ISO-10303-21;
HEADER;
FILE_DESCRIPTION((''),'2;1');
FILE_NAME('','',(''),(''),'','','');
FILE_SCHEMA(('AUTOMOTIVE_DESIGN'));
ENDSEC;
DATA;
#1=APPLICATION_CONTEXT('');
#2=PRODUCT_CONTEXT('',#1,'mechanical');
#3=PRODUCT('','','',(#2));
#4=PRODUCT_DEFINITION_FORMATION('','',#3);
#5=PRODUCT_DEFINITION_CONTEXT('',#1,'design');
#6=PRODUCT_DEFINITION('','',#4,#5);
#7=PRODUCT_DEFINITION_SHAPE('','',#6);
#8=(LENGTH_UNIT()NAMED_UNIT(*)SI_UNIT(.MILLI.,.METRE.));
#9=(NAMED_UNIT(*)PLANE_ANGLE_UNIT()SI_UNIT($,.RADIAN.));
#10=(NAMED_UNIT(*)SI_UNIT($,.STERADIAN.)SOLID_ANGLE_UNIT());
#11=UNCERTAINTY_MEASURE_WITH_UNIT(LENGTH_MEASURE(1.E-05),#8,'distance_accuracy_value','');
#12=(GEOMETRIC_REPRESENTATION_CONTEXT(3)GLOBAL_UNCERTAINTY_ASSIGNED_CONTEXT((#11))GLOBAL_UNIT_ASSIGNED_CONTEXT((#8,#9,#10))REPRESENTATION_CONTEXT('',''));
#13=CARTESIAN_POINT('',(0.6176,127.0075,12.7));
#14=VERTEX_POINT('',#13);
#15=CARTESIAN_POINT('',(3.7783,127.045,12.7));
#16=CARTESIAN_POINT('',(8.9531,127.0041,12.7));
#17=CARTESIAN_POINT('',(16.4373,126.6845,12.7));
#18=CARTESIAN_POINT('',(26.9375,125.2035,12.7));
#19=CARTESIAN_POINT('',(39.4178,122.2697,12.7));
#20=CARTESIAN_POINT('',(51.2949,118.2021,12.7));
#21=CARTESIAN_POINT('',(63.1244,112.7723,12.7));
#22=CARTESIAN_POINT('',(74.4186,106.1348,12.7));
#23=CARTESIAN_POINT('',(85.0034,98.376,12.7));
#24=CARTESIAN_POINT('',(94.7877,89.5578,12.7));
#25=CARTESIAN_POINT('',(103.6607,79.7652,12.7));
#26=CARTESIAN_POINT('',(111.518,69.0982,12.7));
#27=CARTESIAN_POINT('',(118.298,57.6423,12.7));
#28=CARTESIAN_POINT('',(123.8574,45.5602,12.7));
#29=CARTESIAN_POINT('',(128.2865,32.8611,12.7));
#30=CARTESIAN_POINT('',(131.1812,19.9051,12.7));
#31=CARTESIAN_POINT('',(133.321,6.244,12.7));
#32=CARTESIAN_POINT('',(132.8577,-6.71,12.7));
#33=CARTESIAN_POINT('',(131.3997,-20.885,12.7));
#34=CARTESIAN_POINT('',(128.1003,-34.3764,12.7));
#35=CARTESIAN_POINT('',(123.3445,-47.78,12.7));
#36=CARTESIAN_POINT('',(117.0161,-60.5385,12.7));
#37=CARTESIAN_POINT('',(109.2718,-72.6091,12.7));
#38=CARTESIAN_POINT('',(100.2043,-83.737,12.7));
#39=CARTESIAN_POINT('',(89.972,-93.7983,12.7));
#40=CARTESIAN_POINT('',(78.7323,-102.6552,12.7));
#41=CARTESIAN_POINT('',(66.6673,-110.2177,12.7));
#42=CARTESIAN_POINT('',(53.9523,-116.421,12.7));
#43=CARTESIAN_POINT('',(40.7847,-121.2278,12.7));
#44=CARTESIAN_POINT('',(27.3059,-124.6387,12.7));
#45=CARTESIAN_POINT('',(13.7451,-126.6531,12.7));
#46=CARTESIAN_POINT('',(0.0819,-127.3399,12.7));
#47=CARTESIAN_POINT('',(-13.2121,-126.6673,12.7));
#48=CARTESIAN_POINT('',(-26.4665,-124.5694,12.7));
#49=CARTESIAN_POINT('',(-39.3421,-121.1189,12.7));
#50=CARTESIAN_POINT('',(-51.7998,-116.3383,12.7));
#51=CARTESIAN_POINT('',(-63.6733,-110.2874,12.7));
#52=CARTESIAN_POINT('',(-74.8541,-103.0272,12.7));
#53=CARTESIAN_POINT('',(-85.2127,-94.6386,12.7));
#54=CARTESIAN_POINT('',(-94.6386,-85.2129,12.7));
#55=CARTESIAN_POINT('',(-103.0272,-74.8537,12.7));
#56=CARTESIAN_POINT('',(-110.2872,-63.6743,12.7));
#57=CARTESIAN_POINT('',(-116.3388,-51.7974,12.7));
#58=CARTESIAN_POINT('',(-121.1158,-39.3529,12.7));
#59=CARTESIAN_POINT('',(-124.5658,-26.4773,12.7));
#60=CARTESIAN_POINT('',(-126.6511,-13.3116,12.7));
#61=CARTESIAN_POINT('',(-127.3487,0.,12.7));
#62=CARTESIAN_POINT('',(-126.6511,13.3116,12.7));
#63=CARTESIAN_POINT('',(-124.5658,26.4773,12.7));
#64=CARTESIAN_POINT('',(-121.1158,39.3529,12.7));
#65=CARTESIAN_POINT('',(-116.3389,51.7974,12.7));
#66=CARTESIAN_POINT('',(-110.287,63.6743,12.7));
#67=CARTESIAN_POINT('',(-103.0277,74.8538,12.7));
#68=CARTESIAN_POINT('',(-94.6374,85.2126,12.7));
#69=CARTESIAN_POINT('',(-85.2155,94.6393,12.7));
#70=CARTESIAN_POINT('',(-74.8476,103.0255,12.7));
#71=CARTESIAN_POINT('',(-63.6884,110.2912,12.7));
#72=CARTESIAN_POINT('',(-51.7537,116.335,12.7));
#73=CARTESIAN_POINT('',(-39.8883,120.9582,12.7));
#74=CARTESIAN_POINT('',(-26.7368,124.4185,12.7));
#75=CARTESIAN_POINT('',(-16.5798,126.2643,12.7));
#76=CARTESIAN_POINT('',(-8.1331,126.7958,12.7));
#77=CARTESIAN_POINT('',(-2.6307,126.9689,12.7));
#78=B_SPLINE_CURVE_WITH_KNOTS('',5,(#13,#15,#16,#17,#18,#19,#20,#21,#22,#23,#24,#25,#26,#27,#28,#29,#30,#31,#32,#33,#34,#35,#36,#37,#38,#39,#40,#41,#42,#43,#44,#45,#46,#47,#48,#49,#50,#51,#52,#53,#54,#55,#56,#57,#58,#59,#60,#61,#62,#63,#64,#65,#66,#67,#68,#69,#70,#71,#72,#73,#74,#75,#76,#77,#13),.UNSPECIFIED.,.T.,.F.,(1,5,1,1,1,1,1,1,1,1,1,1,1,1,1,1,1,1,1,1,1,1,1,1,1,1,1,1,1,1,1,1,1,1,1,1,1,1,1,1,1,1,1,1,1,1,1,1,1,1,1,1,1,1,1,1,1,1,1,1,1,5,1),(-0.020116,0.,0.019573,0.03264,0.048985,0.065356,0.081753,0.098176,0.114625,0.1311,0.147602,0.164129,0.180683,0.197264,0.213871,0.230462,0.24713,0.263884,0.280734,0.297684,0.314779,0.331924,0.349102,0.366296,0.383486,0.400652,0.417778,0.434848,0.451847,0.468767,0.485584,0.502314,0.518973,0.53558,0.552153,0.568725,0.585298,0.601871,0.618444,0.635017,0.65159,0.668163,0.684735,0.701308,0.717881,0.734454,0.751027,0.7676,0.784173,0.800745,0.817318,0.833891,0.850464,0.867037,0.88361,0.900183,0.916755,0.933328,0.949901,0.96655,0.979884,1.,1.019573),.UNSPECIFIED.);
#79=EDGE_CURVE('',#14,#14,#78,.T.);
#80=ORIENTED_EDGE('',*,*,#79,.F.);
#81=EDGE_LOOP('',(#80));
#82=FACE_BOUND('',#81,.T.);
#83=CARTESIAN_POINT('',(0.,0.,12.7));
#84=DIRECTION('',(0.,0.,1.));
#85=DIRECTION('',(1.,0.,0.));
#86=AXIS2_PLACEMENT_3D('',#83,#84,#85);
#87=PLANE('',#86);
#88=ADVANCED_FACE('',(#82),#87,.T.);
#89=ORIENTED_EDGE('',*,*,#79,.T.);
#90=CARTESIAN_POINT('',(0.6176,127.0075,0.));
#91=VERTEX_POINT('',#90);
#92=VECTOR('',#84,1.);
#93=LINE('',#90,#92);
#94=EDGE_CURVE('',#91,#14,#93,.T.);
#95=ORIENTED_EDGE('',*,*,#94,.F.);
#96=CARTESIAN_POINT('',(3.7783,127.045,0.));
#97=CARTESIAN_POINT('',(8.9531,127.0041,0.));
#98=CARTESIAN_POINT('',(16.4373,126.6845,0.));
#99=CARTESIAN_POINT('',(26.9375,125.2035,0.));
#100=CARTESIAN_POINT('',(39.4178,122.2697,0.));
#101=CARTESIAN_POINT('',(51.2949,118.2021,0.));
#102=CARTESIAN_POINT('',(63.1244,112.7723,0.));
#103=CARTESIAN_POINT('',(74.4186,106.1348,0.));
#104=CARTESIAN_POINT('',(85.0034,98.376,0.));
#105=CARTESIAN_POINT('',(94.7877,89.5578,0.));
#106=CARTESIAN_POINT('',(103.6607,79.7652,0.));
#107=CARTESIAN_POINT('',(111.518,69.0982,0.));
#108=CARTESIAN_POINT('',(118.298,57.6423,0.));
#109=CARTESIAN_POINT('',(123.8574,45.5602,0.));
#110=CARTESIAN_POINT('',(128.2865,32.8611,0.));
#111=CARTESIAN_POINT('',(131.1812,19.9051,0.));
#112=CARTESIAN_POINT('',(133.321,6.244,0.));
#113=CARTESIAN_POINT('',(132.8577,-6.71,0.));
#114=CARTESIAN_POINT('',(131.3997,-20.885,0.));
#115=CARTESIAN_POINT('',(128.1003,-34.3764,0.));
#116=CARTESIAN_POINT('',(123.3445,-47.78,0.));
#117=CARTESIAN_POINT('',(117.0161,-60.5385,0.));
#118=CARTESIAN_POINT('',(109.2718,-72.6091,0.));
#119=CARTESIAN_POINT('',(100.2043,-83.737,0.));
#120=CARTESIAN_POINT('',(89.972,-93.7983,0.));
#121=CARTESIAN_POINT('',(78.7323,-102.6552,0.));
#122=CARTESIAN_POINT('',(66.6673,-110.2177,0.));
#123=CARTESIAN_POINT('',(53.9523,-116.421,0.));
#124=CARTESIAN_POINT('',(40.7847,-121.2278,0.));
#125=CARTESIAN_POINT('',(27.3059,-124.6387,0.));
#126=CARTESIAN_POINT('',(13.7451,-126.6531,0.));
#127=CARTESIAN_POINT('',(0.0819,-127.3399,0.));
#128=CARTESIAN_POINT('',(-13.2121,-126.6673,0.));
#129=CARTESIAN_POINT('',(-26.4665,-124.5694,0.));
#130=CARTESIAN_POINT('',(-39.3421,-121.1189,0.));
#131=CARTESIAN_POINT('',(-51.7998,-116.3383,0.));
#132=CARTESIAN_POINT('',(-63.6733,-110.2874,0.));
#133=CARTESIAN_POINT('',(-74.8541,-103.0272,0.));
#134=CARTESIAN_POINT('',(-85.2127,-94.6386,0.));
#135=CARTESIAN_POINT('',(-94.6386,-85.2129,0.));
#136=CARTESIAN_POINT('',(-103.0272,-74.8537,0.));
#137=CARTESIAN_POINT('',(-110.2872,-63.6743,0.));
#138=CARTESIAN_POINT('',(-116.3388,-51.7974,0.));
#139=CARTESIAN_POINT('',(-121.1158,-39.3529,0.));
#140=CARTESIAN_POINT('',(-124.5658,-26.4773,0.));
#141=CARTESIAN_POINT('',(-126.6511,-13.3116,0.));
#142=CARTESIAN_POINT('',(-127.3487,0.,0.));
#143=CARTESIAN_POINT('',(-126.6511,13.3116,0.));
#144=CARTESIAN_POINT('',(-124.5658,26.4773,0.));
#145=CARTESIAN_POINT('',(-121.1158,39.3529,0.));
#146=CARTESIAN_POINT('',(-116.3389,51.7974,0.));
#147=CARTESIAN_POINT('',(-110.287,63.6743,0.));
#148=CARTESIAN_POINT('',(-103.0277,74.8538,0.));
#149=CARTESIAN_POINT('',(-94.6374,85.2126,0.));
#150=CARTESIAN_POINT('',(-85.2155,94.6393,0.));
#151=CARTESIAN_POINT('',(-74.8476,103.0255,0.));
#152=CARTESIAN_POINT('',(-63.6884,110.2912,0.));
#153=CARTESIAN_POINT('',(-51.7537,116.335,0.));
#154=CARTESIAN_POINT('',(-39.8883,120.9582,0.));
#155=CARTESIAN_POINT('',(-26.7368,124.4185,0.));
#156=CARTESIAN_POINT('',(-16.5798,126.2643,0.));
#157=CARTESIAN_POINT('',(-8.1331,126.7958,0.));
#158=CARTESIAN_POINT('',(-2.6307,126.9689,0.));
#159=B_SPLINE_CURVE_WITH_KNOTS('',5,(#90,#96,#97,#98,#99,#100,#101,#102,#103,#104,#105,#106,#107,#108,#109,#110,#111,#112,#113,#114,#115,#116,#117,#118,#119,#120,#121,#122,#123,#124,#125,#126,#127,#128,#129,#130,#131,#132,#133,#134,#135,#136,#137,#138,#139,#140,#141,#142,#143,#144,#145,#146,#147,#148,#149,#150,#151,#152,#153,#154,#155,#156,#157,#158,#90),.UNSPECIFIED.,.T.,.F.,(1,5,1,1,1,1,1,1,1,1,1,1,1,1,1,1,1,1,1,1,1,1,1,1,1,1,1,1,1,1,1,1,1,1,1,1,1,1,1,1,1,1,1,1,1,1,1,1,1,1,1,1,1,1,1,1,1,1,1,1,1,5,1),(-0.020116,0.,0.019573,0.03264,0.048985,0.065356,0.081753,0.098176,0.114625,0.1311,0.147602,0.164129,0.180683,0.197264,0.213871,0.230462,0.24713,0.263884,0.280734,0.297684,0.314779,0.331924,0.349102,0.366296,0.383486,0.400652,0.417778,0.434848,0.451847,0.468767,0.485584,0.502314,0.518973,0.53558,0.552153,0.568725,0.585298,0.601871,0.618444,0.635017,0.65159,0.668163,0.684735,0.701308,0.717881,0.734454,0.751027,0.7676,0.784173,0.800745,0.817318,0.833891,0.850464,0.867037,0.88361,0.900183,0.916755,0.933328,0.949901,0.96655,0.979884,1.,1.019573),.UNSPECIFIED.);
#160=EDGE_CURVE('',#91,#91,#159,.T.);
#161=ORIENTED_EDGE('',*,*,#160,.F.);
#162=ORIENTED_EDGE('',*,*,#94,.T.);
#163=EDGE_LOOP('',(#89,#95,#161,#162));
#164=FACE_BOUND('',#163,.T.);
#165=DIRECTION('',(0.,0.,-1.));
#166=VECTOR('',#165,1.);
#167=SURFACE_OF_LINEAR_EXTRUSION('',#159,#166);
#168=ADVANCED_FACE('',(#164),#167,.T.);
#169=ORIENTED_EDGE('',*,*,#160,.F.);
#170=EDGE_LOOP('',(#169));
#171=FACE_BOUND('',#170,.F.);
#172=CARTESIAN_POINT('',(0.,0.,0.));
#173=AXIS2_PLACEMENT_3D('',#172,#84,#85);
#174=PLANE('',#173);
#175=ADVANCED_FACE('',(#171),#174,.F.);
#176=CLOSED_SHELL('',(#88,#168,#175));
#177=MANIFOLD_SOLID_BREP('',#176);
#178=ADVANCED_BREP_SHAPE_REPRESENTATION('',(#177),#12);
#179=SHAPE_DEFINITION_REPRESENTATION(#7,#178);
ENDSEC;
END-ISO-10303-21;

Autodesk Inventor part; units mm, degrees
ref_plane "YZ Plane" through (0, 0, 0) normal (1, 0, 0) x (0, 1, 0)
ref_plane "XZ Plane" through (0, 0, 0) normal (0, 1, 0) x (-1, 0, 0)
ref_plane "XY Plane" through (0, 0, 0) normal (0, 0, 1) x (1, 0, 0)
sketch "Main Sketch" plane through (0, 0, 0) normal (0, 0, 1) x (1, 0, 0)
  spline S0 degree 5 poles (0.6176, 127.0075) (3.7783, 127.045) (8.9531, 127.0041) (16.4373, 126.6845) (26.9375, 125.2035) (39.4178, 122.2697) (51.2949, 118.2021) (63.1244, 112.7723) (74.4186, 106.1348) (85.0034, 98.376) (94.7877, 89.5578) (103.6607, 79.7652) (111.518, 69.0982) (118.298, 57.6423) (123.8574, 45.5602) (128.2865, 32.8611) (131.1812, 19.9051) (133.321, 6.244) (132.8577, -6.71) (131.3997, -20.885) (128.1003, -34.3764) (123.3445, -47.78) (117.0161, -60.5385) (109.2718, -72.6091) (100.2043, -83.737) (89.972, -93.7983) (78.7323, -102.6552) (66.6673, -110.2177) (53.9523, -116.421) (40.7847, -121.2278) (27.3059, -124.6387) (13.7451, -126.6531) (0.0819, -127.3399) (-13.2121, -126.6673) (-26.4665, -124.5694) (-39.3421, -121.1189) (-51.7998, -116.3383) (-63.6733, -110.2874) (-74.8541, -103.0272) (-85.2127, -94.6386) (-94.6386, -85.2129) (-103.0272, -74.8537) (-110.2872, -63.6743) (-116.3388, -51.7974) (-121.1158, -39.3529) (-124.5658, -26.4773) (-126.6511, -13.3116) (-127.3487, 0) (-126.6511, 13.3116) (-124.5658, 26.4773) (-121.1158, 39.3529) (-116.3389, 51.7974) (-110.287, 63.6743) (-103.0277, 74.8538) (-94.6374, 85.2126) (-85.2155, 94.6393) (-74.8476, 103.0255) (-63.6884, 110.2912) (-51.7537, 116.335) (-39.8883, 120.9582) (-26.7368, 124.4185) (-16.5798, 126.2643) (-8.1331, 126.7958) (-2.6307, 126.9689) (0.6176, 127.0075) knots 0 0 0 0 0 0 0.019573 0.03264 0.048985 0.065356 0.081753 0.098176 0.114625 0.1311 0.147602 0.164129 0.180683 0.197264 0.213871 0.230462 0.24713 0.263884 0.280734 0.297684 0.314779 0.331924 0.349102 0.366296 0.383486 0.400652 0.417778 0.434848 0.451847 0.468767 0.485584 0.502314 0.518973 0.53558 0.552153 0.568725 0.585298 0.601871 0.618444 0.635017 0.65159 0.668163 0.684735 0.701308 0.717881 0.734454 0.751027 0.7676 0.784173 0.800745 0.817318 0.833891 0.850464 0.867037 0.88361 0.900183 0.916755 0.933328 0.949901 0.96655 0.979884 1 1 1 1 1 1
  point P0 (26.2495, 125.0364)
  point P1 (38.8454, 122.112)
  point P2 (51.1208, 117.9192)
  point P3 (62.948, 112.4926)
  point P4 (74.203, 105.8799)
  point P5 (84.7668, 98.1409)
  point P6 (94.5266, 89.3476)
  point P7 (103.3772, 79.5831)
  point P8 (111.2218, 68.9412)
  point P9 (117.9733, 57.5253)
  point P10 (123.5552, 45.4474)
  point P11 (127.9025, 32.8271)
  point P12 (130.9624, 19.7906)
  point P13 (132.6948, 6.4688)
  point P14 (132.61, -6.6688)
  point P15 (130.9907, -20.4975)
  point P16 (127.7802, -34.182)
  point P17 (122.9969, -47.5192)
  point P18 (116.6938, -60.3067)
  point P19 (108.958, -72.3512)
  point P20 (99.9077, -83.4757)
  point P21 (89.6877, -93.5259)
  point P22 (78.4631, -102.3757)
  point P23 (66.4119, -109.9295)
  point P24 (53.7176, -116.1234)
  point P25 (40.562, -120.9235)
  point P26 (27.119, -124.3231)
  point P27 (13.5497, -126.3377)
  point P28 (0, -127)
  point P29 (-13.2751, -126.3043)
  point P30 (-26.4048, -124.2247)
  point P31 (-39.2452, -120.7842)
  point P32 (-51.6556, -116.0203)
  point P33 (-63.5, -109.9852)
  point P34 (-74.6487, -102.7452)
  point P35 (-84.9796, -94.3794)
  point P36 (-94.3794, -84.9796)
  point P37 (-102.7452, -74.6487)
  point P38 (-109.9852, -63.5)
  point P39 (-116.0203, -51.6556)
  point P40 (-120.7842, -39.2452)
  point P41 (-124.2247, -26.4048)
  point P42 (-126.3043, -13.2751)
  point P43 (-127, 0)
  point P44 (-126.3043, 13.2751)
  point P45 (-124.2247, 26.4048)
  point P46 (-120.7842, 39.2452)
  point P47 (-116.0203, 51.6556)
  point P48 (-109.9852, 63.5)
  point P49 (-102.7452, 74.6487)
  point P50 (-94.3794, 84.9796)
  point P51 (-84.9796, 94.3794)
  point P52 (-74.6487, 102.7452)
  point P53 (-63.5, 109.9852)
  point P54 (-51.6556, 116.0203)
  point P55 (-39.2452, 120.7842)
  point P56 (-26.4048, 124.2247)
  point P57 (-13.2751, 126.3043)
extrude "Cam" add sketch "Main Sketch" along normal blind 12.7
properties part number "Disc Cam" material "Stainless Steel, Austenitic"
